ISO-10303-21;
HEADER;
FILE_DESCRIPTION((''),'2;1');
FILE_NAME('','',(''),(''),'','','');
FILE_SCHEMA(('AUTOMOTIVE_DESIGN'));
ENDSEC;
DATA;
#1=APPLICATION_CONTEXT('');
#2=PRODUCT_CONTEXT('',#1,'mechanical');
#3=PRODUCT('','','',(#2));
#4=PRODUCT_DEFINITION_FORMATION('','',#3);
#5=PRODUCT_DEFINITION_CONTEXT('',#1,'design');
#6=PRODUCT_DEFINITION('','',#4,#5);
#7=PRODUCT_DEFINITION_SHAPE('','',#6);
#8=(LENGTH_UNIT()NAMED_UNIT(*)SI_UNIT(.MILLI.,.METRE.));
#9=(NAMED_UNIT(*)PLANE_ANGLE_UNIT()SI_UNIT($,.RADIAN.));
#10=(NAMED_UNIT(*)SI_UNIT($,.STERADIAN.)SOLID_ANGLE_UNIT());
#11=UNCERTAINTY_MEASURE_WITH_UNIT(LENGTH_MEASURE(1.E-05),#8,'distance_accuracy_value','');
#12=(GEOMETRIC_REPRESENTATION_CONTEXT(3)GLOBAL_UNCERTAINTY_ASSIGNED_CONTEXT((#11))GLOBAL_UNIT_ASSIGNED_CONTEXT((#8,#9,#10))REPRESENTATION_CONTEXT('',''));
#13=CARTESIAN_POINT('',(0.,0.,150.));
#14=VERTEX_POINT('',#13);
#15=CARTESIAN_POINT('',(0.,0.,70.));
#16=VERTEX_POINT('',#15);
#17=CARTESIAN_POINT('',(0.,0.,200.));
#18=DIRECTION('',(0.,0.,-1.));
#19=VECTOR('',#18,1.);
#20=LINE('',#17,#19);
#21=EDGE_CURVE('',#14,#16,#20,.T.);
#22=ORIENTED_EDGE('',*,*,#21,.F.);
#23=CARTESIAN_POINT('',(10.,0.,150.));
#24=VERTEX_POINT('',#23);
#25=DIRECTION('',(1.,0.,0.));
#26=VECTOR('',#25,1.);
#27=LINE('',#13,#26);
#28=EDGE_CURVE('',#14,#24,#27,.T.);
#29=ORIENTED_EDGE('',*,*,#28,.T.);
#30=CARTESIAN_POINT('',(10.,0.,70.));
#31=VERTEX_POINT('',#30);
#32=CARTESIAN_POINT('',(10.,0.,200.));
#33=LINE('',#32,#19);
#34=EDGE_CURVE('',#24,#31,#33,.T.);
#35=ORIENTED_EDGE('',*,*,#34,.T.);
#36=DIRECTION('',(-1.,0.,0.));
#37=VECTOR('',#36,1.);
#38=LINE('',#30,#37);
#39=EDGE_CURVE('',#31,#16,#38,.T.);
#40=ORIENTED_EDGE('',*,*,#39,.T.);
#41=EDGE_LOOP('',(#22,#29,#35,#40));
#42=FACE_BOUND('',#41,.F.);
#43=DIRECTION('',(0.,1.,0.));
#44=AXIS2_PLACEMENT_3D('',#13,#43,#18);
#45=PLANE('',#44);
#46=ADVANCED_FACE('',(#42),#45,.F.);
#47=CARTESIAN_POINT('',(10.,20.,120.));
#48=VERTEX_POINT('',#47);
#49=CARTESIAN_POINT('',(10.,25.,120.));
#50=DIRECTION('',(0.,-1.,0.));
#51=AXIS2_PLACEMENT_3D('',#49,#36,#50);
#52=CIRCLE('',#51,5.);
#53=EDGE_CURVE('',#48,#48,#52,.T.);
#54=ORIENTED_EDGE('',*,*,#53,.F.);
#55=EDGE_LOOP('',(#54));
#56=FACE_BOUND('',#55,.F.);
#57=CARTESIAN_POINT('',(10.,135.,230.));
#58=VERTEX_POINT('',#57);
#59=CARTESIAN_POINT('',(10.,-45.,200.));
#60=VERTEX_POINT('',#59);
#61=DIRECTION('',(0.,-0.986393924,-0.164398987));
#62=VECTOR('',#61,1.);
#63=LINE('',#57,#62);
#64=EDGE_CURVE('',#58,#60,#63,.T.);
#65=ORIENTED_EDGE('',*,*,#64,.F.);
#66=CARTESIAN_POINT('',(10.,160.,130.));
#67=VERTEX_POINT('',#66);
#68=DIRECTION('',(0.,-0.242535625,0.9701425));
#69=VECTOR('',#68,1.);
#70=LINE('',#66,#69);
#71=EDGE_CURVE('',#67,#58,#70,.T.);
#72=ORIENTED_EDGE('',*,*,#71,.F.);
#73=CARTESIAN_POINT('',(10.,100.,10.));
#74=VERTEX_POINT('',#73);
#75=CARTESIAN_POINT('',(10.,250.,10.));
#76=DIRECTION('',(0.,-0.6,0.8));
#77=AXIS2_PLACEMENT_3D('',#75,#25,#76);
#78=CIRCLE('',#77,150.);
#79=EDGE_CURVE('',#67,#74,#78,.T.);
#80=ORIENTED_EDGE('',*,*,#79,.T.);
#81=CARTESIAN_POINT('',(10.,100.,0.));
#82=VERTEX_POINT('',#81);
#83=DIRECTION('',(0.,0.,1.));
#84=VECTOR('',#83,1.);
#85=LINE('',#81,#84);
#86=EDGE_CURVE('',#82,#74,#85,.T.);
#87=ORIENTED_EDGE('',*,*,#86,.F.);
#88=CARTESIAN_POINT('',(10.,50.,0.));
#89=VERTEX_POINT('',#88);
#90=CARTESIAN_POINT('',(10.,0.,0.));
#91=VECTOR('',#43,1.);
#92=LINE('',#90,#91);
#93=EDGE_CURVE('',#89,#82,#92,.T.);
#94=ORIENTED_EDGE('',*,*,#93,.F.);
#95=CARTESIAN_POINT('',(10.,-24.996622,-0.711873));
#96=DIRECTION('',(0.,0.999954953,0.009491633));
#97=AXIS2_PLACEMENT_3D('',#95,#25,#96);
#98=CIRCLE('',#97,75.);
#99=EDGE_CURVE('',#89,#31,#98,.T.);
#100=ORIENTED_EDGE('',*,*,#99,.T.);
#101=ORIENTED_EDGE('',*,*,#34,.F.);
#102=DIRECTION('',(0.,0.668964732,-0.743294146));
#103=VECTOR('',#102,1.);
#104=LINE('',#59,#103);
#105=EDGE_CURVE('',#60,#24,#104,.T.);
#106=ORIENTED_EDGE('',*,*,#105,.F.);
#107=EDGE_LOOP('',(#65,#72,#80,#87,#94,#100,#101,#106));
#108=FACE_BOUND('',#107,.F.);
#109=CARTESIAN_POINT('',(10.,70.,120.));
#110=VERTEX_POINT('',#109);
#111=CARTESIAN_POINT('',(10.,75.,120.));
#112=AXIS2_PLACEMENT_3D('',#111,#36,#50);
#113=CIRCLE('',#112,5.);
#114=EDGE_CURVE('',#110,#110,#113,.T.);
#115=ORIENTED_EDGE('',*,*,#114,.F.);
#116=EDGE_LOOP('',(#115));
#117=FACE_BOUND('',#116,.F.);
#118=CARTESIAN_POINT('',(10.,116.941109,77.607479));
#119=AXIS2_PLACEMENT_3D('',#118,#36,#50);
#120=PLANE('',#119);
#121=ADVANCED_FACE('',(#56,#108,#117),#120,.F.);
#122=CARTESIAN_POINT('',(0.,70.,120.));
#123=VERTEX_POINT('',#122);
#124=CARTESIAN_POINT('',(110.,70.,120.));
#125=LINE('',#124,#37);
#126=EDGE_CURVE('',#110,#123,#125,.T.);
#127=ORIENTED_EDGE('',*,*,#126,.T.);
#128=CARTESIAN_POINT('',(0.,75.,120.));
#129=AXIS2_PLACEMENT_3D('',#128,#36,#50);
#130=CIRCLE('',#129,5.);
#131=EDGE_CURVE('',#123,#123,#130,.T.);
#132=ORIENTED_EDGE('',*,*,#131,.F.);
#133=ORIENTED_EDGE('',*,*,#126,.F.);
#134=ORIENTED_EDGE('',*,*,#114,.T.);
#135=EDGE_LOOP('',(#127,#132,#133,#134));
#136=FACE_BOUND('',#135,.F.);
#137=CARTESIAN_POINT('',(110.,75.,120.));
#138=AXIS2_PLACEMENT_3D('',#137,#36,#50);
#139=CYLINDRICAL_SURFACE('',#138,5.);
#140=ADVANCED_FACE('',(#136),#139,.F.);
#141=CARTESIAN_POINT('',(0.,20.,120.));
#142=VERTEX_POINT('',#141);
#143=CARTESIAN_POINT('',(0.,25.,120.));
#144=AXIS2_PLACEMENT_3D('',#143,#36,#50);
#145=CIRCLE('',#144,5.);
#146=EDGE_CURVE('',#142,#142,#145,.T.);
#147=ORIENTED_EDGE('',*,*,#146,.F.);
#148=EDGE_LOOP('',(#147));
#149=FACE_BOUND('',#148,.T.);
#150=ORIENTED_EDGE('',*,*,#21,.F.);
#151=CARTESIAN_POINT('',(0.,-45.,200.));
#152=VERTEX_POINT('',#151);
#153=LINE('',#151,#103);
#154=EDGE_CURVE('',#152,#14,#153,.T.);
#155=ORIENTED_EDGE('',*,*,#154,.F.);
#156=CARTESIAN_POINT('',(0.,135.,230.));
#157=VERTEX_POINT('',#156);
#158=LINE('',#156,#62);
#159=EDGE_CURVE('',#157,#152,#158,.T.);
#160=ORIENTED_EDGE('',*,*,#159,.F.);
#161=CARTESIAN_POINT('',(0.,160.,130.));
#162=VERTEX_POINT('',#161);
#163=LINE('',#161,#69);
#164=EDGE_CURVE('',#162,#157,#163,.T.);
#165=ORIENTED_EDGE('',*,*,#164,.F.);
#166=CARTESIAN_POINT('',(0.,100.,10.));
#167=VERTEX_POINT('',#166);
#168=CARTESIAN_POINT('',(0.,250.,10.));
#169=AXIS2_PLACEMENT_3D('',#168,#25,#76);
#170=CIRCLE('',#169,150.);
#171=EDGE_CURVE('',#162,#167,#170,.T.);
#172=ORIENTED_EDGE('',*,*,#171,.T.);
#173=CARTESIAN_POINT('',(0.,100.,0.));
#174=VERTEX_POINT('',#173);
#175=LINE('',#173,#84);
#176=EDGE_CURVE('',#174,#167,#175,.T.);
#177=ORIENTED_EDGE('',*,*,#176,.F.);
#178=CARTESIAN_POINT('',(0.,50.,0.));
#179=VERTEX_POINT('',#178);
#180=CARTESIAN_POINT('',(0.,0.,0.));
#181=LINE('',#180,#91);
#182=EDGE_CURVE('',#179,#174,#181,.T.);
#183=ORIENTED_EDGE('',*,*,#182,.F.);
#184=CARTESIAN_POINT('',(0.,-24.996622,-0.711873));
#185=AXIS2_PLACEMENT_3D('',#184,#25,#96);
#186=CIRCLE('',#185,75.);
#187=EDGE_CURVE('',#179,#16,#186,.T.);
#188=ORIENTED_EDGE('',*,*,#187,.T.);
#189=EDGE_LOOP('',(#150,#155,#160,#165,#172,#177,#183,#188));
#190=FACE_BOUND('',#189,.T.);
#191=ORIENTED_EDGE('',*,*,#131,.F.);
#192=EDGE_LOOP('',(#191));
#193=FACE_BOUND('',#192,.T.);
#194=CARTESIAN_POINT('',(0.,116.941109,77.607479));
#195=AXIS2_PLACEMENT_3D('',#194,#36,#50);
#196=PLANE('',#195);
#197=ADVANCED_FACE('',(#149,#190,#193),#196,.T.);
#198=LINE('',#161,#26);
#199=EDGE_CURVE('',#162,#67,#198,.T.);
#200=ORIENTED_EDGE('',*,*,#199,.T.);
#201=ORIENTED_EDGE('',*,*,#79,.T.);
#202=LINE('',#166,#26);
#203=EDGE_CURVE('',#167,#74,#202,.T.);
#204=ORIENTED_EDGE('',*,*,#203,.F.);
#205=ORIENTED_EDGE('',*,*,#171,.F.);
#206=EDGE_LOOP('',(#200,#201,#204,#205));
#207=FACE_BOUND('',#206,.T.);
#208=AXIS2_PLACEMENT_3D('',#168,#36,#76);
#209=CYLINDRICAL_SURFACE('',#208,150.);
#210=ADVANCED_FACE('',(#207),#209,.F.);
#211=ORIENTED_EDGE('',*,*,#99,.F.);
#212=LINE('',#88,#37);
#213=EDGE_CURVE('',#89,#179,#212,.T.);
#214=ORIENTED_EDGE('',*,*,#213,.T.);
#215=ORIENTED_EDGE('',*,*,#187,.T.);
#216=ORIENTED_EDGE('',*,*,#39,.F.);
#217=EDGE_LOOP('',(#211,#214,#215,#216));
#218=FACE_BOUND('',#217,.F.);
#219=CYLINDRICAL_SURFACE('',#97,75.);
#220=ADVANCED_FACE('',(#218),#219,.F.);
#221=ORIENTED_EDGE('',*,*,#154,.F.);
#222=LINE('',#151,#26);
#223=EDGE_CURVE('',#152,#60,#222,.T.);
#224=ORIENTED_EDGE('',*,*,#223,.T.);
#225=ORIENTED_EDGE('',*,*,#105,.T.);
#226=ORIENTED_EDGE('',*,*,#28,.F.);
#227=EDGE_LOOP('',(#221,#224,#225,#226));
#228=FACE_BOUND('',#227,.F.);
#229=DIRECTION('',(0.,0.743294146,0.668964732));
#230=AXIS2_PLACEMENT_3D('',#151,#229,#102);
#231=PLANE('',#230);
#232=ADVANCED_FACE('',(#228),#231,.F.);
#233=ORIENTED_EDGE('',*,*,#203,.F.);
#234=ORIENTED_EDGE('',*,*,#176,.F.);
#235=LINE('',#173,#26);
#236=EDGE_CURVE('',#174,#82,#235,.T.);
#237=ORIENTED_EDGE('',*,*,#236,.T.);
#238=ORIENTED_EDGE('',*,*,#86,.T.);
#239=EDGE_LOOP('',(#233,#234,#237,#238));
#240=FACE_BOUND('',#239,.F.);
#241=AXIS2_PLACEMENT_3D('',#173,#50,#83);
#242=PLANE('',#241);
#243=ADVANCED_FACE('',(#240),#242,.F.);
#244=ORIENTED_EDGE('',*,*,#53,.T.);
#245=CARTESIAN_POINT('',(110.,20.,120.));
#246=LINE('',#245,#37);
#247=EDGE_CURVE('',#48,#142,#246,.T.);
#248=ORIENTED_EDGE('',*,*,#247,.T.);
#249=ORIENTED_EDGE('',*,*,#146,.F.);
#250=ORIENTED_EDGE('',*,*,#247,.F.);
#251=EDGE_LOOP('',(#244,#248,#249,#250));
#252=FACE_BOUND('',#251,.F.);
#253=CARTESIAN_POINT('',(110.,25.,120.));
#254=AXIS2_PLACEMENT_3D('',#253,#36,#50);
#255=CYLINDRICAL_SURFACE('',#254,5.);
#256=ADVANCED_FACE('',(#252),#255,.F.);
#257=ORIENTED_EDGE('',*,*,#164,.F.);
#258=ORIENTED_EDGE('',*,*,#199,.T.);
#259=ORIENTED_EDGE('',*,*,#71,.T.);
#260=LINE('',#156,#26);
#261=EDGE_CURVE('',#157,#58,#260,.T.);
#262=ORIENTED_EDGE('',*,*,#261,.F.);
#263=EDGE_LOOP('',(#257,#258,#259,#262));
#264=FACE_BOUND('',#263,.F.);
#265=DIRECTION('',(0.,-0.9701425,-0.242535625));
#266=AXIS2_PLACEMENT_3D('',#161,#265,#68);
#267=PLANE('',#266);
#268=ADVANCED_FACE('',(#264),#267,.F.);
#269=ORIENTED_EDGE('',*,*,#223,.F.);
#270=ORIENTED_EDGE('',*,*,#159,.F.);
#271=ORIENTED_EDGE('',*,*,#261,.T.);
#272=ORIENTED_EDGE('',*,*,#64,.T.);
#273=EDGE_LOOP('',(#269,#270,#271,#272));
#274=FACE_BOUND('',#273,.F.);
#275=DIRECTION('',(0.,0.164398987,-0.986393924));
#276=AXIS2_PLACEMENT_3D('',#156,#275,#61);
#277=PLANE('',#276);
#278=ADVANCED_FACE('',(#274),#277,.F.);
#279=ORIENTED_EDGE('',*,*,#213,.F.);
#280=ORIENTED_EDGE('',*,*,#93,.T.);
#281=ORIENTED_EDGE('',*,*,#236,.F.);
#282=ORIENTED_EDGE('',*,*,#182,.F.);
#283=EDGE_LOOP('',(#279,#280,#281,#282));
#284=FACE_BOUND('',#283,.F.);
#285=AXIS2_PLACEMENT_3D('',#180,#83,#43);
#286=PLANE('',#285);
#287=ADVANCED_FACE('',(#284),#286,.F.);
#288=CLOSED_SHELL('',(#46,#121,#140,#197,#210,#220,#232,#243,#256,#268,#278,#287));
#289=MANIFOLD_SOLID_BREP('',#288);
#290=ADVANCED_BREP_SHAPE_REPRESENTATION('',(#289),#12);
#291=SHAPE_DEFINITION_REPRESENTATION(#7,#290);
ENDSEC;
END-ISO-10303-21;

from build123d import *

# Parameters (mm, degrees)
F1_DEPTH    = 10
F3_D        = 10
F3_DEPTH    = 100
F3_TIP      = 3.0043030951
F5_DEPTH    = 25
F6_T1_DEPTH = 10


# Not quite as in the source:
# - a fillet or chamfer that OpenCascade refuses, or shapes differently, is made with other operations: its cross-section is extruded or revolved along the edge and cut away or added


with BuildPart() as f1:
    # F0 (on Right) → F1 (new body)
    with BuildSketch(Plane.YZ):
        Polygon((0, 150), (0, 0), (100, 0), (100, 100), (100, 200), (0, 200), align=None)
        Polygon((-45, 200), (0, 150), (0, 200), (100, 200), (100, 100), (160, 130), (135, 230), align=None)
    extrude(amount=F1_DEPTH)

    # F3
    with Locations(Plane.YZ.offset(10)):
        with Locations((25, 120), (75, 120)):
            Hole(F3_D / 2, depth=F3_DEPTH)
            with Locations((0, 0, -(F3_DEPTH + F3_TIP / 2))):  # 118° drill point
                Cone(0, F3_D / 2, F3_TIP, mode=Mode.SUBTRACT)

    # F4 (on face) → F5 (cut)
    with BuildSketch(Plane.YZ.offset(10)):
        with BuildLine():
            Line((0, 0), (50, 0))
            ThreePointArc((50, 0), (36.033388833, 42.8809920236), (0, 70))
            Line((0, 70), (0, 0))
        make_face()
    extrude(amount=-F5_DEPTH, mode=Mode.SUBTRACT)

    # F6: fillet of radius 150 on 1 edges, made by hand

    # F6_s2 → F6_t1 (join)
    with BuildSketch(Plane.YZ):
        with BuildLine():
            ThreePointArc((160, 130), (115.83592135, 77.082039325), (100, 10))
            Line((100, 10), (100, 100))
            Line((100, 100), (160, 130))
        make_face()
    extrude(amount=F6_T1_DEPTH)


solid = f1.part
